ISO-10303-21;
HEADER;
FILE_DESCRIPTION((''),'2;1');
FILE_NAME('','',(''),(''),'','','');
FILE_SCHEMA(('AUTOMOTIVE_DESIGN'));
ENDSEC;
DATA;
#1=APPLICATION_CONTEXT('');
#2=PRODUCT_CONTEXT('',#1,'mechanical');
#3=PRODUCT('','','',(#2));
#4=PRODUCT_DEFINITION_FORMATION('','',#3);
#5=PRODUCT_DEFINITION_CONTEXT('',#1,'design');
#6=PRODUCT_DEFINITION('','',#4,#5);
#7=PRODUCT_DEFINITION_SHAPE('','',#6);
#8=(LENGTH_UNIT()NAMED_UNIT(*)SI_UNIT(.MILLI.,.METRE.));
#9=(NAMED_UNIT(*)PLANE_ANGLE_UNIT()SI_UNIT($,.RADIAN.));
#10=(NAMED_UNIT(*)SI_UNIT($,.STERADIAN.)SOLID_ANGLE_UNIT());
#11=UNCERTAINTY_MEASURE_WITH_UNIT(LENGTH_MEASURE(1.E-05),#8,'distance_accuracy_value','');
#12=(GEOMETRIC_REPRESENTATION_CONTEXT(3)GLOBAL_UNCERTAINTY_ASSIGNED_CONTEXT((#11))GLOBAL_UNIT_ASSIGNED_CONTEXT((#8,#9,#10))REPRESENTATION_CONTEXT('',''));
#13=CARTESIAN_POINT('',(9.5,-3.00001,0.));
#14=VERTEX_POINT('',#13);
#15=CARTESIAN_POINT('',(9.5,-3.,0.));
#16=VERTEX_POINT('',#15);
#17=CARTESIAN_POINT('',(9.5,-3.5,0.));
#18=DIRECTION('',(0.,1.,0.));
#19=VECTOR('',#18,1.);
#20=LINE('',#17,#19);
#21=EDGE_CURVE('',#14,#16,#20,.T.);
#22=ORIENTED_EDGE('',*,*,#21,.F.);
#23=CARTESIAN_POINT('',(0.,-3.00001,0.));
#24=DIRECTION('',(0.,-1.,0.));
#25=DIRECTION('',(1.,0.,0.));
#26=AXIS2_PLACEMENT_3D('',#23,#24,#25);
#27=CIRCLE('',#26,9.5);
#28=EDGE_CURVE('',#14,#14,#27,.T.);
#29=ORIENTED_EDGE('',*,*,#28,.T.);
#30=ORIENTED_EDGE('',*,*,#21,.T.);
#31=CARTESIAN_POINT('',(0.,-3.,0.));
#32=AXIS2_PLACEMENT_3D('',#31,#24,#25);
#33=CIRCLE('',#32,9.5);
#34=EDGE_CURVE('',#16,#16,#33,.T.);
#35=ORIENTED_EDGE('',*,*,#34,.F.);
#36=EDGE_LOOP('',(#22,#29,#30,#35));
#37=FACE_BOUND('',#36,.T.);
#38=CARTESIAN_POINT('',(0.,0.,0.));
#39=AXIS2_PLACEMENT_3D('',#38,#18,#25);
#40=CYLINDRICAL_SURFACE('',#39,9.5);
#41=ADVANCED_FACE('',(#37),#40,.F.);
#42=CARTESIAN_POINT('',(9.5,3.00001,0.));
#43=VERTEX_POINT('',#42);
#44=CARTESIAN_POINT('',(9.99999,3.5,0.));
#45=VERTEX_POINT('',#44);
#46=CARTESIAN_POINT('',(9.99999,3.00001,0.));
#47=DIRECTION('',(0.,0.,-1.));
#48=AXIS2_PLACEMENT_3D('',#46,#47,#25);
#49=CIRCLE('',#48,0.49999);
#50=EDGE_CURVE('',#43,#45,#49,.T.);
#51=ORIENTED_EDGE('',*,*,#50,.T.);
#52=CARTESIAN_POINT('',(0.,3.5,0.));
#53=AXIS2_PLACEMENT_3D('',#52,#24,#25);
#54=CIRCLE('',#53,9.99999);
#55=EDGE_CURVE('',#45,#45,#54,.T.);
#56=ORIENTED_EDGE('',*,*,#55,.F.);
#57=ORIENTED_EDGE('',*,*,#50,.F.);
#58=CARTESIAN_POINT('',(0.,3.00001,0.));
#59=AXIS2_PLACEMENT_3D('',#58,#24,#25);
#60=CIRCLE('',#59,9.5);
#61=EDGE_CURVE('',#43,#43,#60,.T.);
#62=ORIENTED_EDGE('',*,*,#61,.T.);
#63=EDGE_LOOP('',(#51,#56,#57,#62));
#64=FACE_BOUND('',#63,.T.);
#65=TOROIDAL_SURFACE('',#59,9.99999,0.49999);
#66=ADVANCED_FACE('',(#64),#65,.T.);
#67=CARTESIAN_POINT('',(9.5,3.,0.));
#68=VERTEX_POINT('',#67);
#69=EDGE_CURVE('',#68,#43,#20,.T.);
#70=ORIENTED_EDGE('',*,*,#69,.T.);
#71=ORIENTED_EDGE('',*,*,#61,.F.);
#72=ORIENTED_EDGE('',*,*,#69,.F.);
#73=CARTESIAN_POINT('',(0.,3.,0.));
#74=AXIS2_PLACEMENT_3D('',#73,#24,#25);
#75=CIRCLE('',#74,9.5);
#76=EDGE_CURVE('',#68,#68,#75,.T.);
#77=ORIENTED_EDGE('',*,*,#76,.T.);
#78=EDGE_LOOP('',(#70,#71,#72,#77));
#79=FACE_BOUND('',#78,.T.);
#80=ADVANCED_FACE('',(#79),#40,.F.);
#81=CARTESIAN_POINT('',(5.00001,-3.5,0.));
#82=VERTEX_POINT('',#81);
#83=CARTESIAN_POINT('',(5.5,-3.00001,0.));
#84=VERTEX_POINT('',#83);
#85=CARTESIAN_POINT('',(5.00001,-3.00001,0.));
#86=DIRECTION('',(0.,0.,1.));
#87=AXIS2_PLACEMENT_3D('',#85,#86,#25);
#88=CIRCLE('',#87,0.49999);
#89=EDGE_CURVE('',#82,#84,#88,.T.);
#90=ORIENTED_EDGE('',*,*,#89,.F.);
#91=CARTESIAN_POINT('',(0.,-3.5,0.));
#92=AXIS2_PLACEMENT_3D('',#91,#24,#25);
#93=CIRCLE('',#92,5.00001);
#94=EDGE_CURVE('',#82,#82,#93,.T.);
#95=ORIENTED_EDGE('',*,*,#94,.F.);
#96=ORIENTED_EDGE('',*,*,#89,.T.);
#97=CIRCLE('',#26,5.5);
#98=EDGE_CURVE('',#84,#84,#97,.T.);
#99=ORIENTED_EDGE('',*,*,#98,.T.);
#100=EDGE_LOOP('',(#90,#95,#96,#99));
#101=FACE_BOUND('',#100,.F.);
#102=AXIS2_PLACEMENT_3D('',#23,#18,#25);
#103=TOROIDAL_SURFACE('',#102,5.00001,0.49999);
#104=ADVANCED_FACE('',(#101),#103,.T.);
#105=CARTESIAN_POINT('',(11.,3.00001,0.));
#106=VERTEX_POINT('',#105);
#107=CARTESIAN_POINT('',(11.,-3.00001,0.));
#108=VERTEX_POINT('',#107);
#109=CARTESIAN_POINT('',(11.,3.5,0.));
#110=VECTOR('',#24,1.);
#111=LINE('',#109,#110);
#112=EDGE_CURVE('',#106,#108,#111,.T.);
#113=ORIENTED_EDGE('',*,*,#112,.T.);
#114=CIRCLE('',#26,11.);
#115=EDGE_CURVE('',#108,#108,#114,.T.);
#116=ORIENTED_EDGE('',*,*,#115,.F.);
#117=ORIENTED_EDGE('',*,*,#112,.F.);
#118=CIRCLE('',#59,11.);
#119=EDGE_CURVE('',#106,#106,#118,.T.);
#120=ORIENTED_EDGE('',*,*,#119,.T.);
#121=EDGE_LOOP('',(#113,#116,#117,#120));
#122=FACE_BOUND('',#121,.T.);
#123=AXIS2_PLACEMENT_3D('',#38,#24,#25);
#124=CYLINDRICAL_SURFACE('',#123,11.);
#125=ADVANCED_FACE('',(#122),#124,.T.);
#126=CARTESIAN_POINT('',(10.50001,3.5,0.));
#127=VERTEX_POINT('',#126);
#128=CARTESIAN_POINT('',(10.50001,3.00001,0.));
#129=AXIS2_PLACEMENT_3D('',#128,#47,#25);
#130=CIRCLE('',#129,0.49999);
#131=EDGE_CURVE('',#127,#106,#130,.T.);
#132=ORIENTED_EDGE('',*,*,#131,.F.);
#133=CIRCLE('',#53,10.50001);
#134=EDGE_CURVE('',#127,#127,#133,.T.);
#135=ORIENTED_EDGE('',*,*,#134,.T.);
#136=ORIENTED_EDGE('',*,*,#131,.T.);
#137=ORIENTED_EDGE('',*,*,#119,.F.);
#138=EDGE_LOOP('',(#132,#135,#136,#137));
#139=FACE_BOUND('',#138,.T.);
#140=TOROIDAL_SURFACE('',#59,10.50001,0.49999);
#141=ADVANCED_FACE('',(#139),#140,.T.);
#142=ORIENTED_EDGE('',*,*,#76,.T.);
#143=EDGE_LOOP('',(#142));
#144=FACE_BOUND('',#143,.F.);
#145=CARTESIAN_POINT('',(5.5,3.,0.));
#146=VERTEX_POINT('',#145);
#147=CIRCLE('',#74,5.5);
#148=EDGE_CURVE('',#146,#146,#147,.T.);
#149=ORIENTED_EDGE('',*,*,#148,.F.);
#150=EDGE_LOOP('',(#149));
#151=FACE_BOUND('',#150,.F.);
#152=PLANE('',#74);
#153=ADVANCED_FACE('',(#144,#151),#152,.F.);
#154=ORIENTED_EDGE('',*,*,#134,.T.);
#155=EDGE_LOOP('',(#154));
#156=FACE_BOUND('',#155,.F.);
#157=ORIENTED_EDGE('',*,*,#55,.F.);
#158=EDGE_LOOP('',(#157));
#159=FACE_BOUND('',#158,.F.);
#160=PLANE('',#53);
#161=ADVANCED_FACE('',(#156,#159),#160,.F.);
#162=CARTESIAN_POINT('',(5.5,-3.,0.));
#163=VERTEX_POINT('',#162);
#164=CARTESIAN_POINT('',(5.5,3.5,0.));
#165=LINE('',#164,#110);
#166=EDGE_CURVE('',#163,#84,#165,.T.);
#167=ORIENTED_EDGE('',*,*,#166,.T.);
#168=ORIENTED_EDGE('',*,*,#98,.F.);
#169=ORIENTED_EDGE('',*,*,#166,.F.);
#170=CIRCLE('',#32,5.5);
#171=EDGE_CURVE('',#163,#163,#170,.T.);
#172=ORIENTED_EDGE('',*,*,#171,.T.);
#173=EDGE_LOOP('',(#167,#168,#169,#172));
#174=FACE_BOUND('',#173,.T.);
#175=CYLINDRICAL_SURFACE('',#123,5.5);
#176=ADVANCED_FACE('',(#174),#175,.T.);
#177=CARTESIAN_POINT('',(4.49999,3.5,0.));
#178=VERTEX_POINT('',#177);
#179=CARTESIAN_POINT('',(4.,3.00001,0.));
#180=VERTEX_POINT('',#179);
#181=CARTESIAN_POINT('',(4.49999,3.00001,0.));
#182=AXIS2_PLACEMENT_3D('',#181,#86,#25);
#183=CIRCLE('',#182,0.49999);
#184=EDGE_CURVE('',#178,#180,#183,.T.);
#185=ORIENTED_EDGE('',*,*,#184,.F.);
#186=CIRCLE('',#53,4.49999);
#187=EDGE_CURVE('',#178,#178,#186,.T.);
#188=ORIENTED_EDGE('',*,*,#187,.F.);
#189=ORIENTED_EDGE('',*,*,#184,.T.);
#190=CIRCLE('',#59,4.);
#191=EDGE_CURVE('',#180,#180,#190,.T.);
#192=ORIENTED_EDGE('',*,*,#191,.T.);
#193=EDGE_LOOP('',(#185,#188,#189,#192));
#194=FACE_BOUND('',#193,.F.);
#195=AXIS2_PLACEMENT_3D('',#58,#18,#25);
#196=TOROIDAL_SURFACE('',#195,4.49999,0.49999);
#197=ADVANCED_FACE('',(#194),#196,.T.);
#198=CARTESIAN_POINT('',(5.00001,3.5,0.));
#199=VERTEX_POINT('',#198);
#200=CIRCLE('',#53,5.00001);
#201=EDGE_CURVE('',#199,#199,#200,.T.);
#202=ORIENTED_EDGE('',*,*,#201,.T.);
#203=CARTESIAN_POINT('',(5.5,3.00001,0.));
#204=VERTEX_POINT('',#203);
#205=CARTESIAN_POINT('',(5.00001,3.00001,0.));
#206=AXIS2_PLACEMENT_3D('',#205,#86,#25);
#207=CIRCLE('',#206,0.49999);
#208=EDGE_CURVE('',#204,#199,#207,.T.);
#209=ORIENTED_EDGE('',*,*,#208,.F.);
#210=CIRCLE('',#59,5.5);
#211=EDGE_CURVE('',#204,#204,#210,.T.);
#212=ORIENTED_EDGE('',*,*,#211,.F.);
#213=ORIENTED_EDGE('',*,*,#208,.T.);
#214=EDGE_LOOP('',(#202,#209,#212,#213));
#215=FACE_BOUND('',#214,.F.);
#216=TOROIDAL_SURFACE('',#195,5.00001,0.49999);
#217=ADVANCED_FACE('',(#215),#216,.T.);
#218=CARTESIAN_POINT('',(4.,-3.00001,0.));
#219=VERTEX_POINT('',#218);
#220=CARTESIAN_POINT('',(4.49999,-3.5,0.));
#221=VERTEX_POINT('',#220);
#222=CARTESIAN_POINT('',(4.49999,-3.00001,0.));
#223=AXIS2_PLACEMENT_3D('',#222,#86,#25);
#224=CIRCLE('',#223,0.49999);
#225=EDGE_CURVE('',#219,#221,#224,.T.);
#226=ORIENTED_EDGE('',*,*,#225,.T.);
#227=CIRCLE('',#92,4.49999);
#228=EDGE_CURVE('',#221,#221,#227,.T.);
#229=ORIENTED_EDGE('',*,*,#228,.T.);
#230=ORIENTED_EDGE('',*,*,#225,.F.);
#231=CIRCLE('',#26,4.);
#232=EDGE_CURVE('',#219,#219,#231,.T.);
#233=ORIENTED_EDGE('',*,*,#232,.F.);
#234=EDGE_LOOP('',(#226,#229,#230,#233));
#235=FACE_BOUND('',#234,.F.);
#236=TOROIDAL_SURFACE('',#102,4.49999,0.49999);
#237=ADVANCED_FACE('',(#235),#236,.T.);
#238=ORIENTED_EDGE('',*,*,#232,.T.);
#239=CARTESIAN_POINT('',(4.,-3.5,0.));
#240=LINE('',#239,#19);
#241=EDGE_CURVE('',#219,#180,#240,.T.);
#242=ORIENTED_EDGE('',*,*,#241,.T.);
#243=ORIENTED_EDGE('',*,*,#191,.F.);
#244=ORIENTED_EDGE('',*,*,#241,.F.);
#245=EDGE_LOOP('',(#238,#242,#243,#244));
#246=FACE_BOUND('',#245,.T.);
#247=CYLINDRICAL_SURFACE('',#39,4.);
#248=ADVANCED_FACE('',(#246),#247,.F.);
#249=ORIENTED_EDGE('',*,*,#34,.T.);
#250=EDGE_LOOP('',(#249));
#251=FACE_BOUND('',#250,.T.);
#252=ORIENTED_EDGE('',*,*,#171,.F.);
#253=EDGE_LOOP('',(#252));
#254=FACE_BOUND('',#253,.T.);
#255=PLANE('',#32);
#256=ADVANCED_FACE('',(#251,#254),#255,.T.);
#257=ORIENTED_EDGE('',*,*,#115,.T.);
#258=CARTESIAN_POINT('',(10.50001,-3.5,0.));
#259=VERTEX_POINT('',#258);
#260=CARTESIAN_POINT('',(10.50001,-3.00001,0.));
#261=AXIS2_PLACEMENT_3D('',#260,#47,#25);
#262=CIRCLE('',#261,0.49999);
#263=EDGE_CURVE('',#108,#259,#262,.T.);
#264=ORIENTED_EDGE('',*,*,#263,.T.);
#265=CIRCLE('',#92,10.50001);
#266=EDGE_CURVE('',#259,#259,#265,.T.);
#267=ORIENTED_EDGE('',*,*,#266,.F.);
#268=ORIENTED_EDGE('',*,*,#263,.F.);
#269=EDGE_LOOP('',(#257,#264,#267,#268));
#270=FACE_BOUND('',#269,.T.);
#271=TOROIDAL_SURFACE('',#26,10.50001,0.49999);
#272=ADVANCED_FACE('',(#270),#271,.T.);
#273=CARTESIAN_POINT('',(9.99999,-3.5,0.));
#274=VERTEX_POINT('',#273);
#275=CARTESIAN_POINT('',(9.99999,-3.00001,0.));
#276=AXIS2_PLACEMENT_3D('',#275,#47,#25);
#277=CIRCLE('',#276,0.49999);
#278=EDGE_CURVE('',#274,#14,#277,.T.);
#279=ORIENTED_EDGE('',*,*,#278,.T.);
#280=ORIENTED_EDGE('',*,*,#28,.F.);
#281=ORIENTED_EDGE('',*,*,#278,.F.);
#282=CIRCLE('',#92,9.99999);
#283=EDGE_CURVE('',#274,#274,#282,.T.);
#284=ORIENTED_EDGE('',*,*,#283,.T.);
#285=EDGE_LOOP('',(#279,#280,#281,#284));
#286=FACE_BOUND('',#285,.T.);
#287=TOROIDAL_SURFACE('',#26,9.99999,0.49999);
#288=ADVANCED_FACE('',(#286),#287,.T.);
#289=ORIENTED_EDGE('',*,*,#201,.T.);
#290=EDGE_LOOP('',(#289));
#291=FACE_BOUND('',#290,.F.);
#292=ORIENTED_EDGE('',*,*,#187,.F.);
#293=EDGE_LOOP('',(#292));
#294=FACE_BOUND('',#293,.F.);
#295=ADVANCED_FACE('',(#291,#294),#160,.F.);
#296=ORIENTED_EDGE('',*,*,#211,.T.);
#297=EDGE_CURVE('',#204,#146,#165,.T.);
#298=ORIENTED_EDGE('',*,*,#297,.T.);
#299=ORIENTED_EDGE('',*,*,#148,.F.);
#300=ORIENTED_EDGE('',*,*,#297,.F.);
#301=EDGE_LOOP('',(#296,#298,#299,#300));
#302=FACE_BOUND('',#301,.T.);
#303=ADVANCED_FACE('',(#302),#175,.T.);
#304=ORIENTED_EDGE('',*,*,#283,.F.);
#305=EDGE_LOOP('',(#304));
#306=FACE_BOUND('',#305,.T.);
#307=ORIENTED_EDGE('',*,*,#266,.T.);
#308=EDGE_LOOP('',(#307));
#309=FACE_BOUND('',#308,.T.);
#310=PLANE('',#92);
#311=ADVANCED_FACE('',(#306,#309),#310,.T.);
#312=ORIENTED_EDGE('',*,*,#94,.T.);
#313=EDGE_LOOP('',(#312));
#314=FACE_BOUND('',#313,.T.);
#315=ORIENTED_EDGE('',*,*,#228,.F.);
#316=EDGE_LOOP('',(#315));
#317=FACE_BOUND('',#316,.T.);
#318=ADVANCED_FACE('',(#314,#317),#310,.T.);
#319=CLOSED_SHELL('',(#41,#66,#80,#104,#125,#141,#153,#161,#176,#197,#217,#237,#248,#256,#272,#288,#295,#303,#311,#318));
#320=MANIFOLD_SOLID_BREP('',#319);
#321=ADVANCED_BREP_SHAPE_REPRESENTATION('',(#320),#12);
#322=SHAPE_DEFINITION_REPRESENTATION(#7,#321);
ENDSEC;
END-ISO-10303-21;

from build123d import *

# Parameters (mm, degrees)
F0_R     = 11
F0_R_2   = 9.5
F1_DEPTH = 3.5
F0_R_3   = 5.5
F0_R_4   = 4
F2_DEPTH = 3
F3_R     = 0.49999


# Not quite as in the source:
# - a fillet or chamfer is up to 0.001 mm smaller than in the source, because OpenCascade refuses the exact size


with BuildPart() as f1:
    # F0 (on Front) → F1 (new body, symmetric)
    with BuildSketch(Plane.XZ):
        Circle(F0_R)
        Circle(F0_R_2, mode=Mode.SUBTRACT)
    extrude(amount=F1_DEPTH, both=True)



with BuildPart() as f1b:
    # F0 (on Front) → F1, piece 2 (new body, symmetric)
    with BuildSketch(Plane.XZ):
        Circle(F0_R_3)
        Circle(F0_R_4, mode=Mode.SUBTRACT)
    extrude(amount=F1_DEPTH, both=True)


with BuildPart() as f1_1:
    add(f1.part)

    add(f1b.part)  # F2 merges F1b
    # F0 (on Front) → F2 (join, symmetric)
    with BuildSketch(Plane.XZ):
        Circle(F0_R_2)
        Circle(F0_R_3, mode=Mode.SUBTRACT)
    extrude(amount=F2_DEPTH, both=True)

    # F3 (radius 0.5 in the source; OpenCascade refuses exactly that, so slightly less here)
    f3_edges = [f1_1.edges().sort_by_distance(p)[0] for p in [
        (-11, -3.5, 0),
        (-9.5, -3.5, 0),
        (-5.5, -3.5, 0),
        (-4, -3.5, 0),
        (-11, 3.5, 0),
        (-9.5, 3.5, 0),
        (-5.5, 3.5, 0),
        (-4, 3.5, 0),
    ]]
    fillet(f3_edges, radius=F3_R)


solid = f1_1.part
